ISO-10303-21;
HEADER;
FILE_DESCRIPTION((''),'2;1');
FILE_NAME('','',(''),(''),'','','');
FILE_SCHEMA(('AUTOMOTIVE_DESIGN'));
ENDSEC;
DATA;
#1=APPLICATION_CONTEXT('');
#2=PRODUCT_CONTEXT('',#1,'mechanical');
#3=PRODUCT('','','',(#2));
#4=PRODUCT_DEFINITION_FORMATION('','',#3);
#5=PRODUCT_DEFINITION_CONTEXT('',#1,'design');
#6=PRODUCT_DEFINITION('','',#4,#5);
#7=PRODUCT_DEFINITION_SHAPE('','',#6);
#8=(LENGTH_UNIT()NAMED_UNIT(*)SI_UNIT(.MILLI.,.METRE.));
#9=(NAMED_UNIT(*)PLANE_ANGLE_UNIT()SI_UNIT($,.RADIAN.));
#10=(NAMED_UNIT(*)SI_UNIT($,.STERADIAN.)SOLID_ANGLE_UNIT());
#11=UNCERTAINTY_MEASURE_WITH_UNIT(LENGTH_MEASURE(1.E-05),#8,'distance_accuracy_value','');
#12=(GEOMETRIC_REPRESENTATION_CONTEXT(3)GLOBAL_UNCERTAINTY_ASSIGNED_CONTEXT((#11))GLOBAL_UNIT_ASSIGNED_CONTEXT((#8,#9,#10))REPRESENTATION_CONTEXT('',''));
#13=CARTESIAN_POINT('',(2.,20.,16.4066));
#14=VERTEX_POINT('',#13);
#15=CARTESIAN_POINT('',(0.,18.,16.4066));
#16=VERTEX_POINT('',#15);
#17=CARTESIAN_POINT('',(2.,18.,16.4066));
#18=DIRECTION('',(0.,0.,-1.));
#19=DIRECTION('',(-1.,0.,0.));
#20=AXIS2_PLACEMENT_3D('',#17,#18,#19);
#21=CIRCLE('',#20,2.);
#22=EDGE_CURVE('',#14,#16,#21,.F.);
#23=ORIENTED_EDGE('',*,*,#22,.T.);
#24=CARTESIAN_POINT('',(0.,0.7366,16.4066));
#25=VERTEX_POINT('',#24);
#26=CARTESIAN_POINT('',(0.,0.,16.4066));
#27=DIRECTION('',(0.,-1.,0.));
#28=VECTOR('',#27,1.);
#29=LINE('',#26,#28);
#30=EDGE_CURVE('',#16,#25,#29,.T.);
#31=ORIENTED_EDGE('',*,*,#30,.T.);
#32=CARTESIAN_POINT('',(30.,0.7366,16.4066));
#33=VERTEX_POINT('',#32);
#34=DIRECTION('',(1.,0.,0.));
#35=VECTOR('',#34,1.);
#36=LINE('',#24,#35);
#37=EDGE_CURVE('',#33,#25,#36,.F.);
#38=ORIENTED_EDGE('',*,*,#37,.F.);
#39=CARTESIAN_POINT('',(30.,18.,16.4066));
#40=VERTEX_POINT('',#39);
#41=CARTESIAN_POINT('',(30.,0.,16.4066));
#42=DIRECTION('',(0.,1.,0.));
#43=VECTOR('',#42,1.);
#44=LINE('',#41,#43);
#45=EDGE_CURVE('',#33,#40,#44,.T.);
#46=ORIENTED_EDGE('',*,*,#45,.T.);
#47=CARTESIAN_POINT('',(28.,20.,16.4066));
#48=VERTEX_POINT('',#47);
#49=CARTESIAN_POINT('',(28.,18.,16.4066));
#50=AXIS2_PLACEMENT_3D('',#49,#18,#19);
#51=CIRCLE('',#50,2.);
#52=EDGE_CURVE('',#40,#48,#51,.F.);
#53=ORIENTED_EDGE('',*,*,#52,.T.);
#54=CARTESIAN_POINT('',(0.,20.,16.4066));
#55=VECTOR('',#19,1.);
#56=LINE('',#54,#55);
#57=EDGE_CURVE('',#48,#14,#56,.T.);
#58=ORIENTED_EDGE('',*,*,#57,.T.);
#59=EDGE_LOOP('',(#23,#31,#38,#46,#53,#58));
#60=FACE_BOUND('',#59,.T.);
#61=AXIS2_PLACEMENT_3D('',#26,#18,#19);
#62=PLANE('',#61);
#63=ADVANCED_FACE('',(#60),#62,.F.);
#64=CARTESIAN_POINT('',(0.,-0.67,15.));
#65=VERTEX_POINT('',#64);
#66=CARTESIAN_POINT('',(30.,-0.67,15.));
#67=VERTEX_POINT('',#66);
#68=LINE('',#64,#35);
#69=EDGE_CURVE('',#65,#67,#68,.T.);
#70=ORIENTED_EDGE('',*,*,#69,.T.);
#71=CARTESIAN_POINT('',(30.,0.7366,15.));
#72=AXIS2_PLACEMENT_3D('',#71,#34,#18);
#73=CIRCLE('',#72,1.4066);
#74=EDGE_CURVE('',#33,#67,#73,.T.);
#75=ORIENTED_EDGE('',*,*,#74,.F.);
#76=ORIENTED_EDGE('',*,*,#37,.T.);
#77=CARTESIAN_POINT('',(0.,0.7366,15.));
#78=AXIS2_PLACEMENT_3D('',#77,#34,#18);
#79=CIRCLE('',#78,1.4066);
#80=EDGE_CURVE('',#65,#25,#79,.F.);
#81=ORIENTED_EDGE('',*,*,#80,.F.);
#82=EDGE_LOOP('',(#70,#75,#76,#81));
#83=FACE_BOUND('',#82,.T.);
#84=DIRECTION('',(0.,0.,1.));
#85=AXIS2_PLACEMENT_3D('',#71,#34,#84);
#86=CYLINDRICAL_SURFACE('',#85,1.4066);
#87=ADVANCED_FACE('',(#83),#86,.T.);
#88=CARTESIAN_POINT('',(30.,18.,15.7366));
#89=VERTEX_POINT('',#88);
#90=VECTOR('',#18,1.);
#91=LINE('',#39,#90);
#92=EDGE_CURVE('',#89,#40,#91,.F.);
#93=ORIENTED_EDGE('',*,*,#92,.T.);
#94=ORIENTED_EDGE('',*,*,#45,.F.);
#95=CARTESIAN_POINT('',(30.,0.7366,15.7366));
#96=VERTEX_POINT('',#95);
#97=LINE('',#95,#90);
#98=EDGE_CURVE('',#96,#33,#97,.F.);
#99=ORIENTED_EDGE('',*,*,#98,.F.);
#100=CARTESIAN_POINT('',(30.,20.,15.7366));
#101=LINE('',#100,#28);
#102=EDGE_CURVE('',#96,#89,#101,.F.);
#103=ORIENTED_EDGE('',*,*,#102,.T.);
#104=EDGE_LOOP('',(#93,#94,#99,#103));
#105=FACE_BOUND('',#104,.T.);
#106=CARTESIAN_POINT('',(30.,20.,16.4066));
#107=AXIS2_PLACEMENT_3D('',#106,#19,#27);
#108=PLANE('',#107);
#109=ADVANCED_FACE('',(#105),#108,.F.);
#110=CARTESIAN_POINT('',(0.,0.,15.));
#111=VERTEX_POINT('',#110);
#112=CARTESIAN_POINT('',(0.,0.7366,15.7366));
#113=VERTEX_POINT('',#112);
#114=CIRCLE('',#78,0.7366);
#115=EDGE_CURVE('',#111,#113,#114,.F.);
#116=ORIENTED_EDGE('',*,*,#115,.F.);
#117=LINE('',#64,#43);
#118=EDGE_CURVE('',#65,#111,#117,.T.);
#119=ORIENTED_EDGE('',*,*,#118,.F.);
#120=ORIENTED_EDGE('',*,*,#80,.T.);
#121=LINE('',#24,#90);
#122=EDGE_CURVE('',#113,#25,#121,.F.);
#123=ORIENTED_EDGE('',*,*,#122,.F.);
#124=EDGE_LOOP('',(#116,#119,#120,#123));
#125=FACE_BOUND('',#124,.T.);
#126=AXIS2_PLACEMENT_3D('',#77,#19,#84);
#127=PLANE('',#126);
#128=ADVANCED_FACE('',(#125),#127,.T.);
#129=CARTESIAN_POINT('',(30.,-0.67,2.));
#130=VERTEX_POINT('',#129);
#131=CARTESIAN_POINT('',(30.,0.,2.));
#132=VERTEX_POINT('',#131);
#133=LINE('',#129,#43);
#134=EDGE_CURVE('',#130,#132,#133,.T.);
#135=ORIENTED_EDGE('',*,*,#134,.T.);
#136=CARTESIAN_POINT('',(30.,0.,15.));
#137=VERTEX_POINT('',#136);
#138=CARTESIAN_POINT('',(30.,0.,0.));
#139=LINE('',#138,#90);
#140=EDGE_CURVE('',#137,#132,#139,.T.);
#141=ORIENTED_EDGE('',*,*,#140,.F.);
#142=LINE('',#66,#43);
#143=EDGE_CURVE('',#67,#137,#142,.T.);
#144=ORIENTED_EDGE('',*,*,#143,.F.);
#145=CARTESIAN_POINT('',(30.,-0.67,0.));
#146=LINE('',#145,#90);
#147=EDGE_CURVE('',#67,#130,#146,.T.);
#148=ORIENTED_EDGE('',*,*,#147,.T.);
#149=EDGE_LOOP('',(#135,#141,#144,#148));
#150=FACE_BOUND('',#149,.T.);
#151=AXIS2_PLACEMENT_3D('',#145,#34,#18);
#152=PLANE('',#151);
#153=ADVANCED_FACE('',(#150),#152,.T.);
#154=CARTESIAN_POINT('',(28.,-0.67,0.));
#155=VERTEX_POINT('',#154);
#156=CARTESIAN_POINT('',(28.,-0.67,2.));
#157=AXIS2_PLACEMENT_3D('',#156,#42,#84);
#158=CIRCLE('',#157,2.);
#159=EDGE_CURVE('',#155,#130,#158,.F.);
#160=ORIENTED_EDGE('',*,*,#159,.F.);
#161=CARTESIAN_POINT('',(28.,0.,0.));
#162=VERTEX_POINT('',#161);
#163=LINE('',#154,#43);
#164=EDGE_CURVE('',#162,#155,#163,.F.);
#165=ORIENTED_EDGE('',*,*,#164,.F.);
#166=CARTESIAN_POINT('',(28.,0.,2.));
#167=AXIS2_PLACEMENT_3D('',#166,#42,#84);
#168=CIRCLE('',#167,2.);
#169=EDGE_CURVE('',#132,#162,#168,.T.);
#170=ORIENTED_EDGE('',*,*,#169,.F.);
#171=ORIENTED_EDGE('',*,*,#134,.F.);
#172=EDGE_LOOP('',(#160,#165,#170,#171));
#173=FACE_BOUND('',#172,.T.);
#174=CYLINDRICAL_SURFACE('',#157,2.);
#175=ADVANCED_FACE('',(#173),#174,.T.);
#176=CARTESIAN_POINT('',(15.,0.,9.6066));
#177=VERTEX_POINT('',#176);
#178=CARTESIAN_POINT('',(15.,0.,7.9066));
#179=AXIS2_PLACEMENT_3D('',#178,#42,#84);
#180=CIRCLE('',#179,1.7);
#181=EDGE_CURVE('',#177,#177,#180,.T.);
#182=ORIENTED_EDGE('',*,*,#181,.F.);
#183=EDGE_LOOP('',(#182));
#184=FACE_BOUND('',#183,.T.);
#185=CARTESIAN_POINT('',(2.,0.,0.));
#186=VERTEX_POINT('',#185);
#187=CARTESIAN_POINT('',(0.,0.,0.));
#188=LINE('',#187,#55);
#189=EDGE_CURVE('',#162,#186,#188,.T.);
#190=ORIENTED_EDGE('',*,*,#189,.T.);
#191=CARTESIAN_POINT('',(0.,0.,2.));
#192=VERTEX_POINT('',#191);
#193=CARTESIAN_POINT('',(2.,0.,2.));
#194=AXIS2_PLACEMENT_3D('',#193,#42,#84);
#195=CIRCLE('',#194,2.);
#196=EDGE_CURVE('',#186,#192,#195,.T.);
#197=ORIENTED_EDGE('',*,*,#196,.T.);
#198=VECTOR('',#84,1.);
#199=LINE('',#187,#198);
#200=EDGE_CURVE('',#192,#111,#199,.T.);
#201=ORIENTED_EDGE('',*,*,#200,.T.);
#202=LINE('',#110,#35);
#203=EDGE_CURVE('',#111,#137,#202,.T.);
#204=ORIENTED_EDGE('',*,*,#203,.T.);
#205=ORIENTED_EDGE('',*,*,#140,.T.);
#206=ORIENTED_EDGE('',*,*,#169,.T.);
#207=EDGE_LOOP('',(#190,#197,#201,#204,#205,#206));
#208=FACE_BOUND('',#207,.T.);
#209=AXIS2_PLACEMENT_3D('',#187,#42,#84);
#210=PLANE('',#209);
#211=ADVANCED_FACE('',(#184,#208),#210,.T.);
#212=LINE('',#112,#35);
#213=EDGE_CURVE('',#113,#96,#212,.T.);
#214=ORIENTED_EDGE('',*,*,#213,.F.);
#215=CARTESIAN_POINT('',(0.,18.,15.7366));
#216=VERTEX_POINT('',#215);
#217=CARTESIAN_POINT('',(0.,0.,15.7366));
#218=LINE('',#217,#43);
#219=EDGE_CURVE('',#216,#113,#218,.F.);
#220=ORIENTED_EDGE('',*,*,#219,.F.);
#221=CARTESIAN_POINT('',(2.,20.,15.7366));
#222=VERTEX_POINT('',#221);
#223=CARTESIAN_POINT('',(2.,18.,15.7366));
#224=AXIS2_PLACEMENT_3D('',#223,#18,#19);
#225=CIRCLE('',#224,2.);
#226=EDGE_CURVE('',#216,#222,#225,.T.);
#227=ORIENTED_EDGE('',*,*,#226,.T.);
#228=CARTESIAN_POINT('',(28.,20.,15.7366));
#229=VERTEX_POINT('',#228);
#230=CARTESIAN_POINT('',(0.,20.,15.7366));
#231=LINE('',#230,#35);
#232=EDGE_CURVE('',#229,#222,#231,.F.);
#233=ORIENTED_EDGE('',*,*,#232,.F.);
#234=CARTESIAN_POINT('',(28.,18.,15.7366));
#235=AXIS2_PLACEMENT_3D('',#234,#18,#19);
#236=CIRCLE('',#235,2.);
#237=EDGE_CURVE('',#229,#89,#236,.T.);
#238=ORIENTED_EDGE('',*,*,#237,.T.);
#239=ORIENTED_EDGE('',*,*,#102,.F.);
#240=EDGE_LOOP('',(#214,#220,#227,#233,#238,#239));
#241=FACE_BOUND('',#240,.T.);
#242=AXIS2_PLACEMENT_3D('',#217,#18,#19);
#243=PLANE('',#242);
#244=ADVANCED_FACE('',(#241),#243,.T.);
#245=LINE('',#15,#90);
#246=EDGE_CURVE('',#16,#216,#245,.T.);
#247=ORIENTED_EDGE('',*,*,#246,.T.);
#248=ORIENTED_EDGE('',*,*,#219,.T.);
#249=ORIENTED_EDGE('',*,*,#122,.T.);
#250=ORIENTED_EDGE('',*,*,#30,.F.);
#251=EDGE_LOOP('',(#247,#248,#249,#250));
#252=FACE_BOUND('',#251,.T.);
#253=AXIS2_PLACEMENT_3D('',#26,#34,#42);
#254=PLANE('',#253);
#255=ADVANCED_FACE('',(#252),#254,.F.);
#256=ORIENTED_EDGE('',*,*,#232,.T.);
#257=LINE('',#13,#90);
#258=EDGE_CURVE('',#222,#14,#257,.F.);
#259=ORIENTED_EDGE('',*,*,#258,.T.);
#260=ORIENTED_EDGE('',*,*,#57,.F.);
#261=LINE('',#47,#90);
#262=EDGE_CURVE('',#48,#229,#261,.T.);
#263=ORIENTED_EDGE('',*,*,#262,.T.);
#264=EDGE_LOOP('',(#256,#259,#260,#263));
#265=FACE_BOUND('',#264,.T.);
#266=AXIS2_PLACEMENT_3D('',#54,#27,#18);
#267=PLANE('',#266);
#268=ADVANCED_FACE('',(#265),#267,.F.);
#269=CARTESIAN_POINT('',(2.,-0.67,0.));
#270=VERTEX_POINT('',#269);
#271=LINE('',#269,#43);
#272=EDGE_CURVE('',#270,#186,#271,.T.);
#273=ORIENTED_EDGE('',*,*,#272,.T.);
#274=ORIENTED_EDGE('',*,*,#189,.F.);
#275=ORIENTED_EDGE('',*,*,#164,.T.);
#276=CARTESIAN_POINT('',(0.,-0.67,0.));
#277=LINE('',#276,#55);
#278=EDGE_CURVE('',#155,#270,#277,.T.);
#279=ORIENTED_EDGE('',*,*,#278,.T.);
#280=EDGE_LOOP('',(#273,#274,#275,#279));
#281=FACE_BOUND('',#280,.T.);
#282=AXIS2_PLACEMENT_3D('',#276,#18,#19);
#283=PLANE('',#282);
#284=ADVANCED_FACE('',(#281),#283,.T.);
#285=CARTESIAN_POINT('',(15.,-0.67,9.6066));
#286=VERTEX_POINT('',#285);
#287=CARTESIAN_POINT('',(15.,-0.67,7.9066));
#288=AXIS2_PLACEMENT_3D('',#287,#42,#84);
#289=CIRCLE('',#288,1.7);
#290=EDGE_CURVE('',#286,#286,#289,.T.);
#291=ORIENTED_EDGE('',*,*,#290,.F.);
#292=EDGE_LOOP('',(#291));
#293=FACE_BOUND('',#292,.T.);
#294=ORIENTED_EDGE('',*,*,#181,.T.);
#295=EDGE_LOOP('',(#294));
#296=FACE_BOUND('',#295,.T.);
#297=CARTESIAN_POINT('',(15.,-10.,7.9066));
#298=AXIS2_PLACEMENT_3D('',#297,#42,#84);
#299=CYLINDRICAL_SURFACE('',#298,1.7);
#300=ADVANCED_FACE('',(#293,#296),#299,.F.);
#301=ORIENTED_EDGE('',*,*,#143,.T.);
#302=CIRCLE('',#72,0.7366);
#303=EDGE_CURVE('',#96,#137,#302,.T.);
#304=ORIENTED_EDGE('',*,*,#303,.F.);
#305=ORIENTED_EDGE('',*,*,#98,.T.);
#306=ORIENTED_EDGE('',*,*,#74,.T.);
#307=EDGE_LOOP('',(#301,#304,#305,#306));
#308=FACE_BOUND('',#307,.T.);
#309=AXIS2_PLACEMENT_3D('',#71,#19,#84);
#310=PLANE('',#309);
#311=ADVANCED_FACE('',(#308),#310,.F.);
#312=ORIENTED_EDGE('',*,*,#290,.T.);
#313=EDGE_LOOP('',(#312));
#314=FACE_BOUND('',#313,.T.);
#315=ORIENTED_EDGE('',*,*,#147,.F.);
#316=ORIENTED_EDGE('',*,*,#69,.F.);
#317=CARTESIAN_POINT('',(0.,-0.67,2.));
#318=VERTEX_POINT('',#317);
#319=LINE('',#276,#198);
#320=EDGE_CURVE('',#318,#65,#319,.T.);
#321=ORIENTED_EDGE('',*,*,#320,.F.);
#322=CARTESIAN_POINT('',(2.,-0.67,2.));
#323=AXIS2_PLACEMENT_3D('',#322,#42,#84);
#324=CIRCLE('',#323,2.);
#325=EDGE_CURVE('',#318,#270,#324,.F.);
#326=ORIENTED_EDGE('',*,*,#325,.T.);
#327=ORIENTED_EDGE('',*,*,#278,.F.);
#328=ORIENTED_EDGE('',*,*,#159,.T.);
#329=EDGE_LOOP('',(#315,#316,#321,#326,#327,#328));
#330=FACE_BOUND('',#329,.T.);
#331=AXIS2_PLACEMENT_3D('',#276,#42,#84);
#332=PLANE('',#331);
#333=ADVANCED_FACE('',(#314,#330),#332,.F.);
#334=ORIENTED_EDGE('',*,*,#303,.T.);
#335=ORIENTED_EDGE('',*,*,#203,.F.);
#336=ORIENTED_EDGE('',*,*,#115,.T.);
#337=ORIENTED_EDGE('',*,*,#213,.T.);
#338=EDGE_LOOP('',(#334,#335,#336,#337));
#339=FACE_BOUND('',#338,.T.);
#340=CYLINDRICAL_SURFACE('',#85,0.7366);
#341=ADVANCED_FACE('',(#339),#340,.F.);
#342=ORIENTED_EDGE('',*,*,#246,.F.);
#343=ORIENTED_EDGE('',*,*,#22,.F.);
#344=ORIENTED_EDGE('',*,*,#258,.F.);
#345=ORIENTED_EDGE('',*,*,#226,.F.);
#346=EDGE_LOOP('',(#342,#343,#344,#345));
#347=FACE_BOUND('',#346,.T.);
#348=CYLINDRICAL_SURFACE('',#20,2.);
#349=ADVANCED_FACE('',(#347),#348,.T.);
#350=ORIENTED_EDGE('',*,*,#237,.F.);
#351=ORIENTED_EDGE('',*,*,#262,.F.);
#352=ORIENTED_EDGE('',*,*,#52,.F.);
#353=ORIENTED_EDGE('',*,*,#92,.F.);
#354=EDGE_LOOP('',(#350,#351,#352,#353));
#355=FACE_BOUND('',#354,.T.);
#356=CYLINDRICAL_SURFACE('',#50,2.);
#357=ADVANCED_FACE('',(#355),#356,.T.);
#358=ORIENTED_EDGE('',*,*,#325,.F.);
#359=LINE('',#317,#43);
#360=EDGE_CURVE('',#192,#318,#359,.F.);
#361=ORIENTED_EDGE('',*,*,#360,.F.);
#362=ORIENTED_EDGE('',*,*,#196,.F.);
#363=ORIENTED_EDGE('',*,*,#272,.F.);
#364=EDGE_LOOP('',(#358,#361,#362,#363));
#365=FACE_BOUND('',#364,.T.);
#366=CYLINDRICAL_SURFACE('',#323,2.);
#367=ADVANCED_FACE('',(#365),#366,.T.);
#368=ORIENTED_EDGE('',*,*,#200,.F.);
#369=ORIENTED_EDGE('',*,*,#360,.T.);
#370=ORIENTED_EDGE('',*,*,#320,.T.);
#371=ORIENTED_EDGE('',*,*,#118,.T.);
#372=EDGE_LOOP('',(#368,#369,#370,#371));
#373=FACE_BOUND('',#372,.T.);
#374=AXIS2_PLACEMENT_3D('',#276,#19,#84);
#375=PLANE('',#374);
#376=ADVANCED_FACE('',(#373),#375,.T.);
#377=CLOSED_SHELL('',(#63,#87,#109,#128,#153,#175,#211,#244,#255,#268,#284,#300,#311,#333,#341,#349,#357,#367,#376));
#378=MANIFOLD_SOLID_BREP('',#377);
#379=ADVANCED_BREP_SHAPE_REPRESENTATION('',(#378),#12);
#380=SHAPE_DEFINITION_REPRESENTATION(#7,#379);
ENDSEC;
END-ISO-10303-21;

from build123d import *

# Parameters (mm, degrees)
SKETCH1_W          = 30
SKETCH1_H          = 15
BASE_FLANGE1_DEPTH = 0.67
EDGE_FLANGE1_DEPTH = 30
SKETCH7_R          = 1.7
CUT_EXTRUDE1_DEPTH = 10
FILLET1_R          = 2


# Sheet-metal steps are written as plain solids
with BuildPart() as part:
    # Sketch1 → Base-Flange1 (new body)
    with BuildSketch(Plane(origin=(0, 0, 0), x_dir=(1, 0, 0), z_dir=(0, 1, 0))):
        with Locations((15, -7.5)):
            Rectangle(SKETCH1_W, SKETCH1_H)
    extrude(amount=-BASE_FLANGE1_DEPTH)

    # Edge-Flange1 section (across the edge) → Edge-Flange1 (add)
    with BuildSketch(Plane(origin=(0, 0, 15.7366), x_dir=(0, 0, -1), z_dir=(1, 0, 0))):
        with BuildLine():
            Line((-0.67, 0.7366), (-0.67, 20))
            Line((-0.67, 20), (0, 20))
            Line((0, 20), (0, 0.7366))
            ThreePointArc((0, 0.7366), (0.215745145, 0.215745145), (0.7366, 0))
            Line((0.7366, 0), (0.7366, -0.67))
            ThreePointArc((0.7366, -0.67), (-0.258016398, -0.258016398), (-0.67, 0.7366))
        make_face()
    extrude(amount=EDGE_FLANGE1_DEPTH)

    # Sketch7 → Cut-Extrude1 (cut)
    with BuildSketch(Plane(origin=(0, 0, 0), x_dir=(1, 0, 0), z_dir=(0, 1, 0))):
        with Locations(Location((15, -7.9066, 0), (0, 0, 270))):
            Circle(SKETCH7_R)
    extrude(amount=-CUT_EXTRUDE1_DEPTH, mode=Mode.SUBTRACT)

    # Fillet1
    fillet1_edges = [part.edges().sort_by_distance(p)[0] for p in [
        (0, 20, 16.0716),
        (30, 20, 16.0716),
        (0, -0.335, 0),
        (30, -0.335, 0),
    ]]
    fillet(fillet1_edges, radius=FILLET1_R)


solid = part.part
